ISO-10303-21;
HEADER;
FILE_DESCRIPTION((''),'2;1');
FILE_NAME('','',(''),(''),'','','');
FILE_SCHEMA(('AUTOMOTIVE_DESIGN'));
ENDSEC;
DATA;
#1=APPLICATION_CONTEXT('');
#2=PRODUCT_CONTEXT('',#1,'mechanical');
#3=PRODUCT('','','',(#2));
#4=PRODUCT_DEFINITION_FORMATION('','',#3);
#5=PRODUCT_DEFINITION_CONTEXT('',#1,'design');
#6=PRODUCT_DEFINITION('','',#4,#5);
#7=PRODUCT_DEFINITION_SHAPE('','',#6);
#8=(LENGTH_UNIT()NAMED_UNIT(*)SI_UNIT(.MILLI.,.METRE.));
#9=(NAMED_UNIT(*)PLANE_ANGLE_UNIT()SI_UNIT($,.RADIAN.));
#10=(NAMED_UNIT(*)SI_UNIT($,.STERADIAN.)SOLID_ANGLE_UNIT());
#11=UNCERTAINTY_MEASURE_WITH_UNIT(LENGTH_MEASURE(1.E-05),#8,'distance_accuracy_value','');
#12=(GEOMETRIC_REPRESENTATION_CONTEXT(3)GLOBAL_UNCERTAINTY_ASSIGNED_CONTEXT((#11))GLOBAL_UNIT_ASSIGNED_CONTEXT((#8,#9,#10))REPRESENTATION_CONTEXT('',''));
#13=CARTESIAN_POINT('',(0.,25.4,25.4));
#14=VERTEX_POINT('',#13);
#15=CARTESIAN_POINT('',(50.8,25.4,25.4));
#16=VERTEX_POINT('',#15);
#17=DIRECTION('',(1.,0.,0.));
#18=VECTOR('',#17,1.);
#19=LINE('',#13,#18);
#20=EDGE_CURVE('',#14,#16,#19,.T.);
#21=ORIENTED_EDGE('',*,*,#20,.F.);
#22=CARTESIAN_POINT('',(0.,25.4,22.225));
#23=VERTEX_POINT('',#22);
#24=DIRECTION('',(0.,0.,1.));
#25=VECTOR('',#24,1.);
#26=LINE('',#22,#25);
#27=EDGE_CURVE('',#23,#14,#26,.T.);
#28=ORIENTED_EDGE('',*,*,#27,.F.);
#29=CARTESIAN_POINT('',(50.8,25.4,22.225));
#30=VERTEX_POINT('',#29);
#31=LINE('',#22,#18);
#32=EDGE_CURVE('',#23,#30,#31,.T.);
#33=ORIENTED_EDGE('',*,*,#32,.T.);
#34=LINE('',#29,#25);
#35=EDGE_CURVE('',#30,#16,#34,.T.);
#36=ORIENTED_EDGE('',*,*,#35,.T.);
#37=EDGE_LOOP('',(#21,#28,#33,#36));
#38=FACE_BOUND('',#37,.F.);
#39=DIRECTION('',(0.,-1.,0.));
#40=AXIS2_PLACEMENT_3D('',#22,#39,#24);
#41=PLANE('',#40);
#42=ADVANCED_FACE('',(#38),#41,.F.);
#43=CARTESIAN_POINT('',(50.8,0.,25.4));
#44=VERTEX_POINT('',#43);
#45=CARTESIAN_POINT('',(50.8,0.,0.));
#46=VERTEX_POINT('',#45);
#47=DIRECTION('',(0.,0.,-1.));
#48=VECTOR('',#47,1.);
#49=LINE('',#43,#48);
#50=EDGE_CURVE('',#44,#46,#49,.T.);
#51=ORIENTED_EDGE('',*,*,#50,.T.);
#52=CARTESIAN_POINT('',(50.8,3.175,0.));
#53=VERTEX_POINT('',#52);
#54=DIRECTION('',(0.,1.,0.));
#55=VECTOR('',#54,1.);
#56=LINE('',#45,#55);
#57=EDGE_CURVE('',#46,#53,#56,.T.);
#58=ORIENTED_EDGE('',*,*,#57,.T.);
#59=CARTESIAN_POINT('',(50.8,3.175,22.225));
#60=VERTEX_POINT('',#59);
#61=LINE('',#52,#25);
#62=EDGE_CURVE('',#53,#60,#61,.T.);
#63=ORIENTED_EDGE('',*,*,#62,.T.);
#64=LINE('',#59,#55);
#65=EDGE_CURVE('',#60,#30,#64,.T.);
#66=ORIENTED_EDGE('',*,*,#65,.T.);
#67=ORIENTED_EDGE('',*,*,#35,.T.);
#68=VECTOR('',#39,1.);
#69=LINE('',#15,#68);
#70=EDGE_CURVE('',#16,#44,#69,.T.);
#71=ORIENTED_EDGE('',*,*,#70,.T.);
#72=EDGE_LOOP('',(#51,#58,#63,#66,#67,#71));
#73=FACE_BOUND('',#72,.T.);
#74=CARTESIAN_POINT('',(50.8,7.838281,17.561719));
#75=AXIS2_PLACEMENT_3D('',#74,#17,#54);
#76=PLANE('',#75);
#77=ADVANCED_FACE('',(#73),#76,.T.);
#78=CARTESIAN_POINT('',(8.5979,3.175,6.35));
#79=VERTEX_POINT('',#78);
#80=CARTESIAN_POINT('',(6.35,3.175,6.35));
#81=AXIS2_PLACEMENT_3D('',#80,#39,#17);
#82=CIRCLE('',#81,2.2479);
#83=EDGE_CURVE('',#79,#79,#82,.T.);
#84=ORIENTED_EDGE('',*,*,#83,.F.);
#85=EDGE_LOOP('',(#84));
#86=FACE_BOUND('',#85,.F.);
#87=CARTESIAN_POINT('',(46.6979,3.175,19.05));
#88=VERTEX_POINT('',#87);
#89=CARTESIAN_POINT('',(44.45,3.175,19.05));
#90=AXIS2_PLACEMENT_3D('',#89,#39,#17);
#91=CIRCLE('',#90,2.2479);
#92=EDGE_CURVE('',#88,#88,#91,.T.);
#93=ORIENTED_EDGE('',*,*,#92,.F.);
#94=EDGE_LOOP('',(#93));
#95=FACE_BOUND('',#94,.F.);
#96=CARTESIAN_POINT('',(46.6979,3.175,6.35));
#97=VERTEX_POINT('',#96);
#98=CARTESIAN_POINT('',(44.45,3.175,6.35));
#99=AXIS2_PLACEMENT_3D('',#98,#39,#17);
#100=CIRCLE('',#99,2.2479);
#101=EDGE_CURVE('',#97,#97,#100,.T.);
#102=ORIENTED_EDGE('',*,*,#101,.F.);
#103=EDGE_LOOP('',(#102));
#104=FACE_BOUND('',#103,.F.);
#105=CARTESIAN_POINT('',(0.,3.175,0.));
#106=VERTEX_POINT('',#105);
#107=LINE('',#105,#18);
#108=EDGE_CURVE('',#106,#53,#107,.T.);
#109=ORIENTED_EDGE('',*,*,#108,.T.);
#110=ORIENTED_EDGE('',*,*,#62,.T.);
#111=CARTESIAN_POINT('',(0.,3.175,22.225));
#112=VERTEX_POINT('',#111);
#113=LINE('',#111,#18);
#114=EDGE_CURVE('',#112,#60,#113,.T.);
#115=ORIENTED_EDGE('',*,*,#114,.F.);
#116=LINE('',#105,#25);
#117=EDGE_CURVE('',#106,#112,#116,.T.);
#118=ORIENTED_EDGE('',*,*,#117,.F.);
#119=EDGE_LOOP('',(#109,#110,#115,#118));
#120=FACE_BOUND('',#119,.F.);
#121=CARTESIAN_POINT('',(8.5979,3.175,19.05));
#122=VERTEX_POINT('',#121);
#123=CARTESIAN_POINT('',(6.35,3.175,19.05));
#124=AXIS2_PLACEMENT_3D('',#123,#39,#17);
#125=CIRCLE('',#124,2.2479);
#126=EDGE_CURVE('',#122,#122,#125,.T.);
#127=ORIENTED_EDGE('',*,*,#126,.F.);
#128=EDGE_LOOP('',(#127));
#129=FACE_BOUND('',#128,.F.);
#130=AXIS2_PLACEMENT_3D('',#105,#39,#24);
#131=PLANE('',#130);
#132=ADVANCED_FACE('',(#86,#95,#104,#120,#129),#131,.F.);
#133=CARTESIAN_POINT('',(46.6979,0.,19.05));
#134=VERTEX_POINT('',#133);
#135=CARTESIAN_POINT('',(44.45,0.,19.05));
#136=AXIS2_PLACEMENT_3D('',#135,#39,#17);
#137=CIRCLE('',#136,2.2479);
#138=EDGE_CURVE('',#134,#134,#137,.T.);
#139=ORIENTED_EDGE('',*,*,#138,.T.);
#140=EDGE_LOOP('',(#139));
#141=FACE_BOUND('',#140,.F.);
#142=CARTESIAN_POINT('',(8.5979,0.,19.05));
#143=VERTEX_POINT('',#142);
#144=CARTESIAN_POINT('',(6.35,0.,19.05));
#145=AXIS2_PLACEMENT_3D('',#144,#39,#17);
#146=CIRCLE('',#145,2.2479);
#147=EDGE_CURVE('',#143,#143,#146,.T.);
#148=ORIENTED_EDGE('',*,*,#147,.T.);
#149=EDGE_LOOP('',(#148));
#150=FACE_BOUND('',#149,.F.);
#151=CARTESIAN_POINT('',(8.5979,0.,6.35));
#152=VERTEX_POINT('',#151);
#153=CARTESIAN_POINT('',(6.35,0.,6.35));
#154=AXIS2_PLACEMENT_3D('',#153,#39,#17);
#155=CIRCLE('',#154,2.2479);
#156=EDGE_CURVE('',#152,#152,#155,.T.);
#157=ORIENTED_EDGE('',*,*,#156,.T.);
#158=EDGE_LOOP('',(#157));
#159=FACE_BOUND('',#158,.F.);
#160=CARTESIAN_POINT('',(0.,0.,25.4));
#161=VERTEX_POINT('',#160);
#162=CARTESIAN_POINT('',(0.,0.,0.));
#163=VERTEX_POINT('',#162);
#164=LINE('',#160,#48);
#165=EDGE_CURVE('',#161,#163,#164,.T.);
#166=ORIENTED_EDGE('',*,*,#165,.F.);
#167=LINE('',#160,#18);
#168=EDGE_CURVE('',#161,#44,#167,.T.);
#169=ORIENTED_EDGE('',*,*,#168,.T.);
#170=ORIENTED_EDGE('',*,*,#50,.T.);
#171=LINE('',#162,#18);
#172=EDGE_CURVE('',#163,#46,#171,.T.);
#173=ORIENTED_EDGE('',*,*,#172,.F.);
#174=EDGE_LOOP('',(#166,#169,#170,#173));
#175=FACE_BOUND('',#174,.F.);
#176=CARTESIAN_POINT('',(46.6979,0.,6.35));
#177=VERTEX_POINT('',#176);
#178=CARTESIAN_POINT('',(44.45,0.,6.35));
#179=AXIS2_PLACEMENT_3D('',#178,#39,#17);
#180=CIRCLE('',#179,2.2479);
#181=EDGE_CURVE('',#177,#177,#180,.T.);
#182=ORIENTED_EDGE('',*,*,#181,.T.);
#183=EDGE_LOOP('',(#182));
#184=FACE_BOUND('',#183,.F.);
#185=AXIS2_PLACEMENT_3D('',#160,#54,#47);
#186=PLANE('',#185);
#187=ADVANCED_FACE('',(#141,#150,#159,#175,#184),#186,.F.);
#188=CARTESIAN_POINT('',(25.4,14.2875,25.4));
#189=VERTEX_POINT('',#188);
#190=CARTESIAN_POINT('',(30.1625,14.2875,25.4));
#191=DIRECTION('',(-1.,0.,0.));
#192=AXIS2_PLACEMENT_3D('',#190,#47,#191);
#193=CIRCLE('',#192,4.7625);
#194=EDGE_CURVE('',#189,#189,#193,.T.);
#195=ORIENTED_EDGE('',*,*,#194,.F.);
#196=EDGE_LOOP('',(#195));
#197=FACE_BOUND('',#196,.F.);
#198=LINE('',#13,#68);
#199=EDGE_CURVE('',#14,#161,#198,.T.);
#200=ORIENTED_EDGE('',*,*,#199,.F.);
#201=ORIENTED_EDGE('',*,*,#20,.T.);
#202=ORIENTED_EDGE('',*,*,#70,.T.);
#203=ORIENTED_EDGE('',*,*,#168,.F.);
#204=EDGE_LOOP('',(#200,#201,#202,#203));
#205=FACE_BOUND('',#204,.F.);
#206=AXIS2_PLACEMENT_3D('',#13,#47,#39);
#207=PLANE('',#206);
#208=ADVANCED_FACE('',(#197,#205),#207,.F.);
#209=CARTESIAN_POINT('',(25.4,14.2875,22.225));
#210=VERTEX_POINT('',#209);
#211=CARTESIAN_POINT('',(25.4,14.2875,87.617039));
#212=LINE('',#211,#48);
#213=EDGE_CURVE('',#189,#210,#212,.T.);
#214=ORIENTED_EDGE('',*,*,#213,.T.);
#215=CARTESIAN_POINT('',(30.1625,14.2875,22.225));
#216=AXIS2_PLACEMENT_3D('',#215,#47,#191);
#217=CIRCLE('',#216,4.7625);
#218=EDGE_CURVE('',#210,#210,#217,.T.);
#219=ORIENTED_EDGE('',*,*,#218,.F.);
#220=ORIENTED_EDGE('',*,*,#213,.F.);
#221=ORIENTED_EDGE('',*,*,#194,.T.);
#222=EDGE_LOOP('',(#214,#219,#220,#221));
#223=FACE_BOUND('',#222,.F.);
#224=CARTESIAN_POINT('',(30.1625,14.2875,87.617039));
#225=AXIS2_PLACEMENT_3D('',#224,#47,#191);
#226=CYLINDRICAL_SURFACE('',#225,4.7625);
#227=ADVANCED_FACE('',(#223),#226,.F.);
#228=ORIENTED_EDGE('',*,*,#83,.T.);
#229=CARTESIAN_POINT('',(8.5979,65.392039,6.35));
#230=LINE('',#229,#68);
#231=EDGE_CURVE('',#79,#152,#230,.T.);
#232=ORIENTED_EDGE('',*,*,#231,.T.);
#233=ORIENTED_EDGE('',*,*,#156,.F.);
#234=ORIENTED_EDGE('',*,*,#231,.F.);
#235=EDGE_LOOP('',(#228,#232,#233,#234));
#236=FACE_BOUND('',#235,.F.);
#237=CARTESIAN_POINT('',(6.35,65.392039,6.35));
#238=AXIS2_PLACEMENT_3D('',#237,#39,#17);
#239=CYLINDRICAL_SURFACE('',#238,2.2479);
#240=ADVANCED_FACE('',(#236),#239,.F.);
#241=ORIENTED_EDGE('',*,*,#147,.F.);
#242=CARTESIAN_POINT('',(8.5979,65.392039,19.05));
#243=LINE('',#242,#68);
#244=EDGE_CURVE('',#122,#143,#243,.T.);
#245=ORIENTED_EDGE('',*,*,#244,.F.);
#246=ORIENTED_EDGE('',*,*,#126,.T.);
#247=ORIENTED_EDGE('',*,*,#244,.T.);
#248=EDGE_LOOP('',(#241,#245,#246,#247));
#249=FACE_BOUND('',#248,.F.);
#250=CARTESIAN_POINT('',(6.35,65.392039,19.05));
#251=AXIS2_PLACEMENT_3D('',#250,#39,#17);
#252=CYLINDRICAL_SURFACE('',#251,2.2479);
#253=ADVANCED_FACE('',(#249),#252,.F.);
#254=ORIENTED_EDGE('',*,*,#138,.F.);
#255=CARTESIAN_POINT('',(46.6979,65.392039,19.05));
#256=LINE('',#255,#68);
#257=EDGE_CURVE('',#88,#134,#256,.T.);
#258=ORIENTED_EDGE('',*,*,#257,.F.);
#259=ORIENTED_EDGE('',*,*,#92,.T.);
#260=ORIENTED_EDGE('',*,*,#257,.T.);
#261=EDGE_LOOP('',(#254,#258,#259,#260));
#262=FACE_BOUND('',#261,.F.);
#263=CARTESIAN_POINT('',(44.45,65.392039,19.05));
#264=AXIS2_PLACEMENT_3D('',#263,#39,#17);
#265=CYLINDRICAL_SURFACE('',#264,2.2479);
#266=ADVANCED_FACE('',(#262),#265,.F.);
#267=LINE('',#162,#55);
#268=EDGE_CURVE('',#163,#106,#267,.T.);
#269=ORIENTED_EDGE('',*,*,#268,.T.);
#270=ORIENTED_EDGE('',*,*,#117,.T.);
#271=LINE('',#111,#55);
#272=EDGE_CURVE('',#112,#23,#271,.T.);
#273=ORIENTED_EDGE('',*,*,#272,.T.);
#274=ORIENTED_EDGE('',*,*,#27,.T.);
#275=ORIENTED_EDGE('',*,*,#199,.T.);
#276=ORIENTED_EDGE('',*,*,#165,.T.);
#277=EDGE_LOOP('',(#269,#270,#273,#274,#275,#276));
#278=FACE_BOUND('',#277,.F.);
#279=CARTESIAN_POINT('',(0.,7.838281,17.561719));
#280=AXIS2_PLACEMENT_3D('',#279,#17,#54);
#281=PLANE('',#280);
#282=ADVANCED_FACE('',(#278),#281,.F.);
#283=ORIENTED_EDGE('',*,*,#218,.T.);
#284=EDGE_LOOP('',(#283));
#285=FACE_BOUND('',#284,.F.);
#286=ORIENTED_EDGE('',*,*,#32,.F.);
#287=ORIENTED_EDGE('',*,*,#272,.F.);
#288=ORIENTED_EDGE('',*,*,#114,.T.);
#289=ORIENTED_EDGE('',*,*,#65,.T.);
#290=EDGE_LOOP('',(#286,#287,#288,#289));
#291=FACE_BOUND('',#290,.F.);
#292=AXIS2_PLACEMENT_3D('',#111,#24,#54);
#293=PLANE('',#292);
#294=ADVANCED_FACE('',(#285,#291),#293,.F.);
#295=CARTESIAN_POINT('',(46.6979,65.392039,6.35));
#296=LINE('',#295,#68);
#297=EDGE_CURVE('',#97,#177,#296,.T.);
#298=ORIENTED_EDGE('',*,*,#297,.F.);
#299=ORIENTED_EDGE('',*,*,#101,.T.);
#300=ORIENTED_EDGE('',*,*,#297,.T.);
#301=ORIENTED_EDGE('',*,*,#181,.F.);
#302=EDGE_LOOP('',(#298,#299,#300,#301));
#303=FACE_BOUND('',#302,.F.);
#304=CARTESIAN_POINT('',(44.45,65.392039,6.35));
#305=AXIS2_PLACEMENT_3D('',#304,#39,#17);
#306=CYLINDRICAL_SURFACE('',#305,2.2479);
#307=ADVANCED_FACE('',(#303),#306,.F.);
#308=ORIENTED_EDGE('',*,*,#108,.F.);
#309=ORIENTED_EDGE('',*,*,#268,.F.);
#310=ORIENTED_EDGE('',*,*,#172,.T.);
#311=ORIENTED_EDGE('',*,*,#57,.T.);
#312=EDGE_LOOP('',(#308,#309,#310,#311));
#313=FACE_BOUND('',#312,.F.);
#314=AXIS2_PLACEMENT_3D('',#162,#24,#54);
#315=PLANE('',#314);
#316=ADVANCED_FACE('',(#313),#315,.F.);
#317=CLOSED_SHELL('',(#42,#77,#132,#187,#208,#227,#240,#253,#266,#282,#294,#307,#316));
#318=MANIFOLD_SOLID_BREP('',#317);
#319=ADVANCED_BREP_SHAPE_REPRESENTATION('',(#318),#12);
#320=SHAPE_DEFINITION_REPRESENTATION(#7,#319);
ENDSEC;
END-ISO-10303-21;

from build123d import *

# Parameters (mm, degrees)
F1_DEPTH = 50.8
F4_D     = 4.4958
F5_D     = 9.525


# Not quite as in the source:
# - a length typed as a fraction of an inch, garbled in the dataset ("3 / 203.2 mm" for 3/8 in), is restored


with BuildPart() as f1:
    # F0 (on Right) → F1 (new body)
    with BuildSketch(Plane.YZ):
        Polygon((0, 25.4), (0, 0), (3.175, 0), (3.175, 22.225), (25.4, 22.225), (25.4, 25.4), align=None)
    extrude(amount=F1_DEPTH)

    # F4 (through all)
    with Locations(Plane(origin=(0, 3.175, 0), x_dir=(-1, 0, 0), z_dir=(0, 1, 0))):
        with Locations((-44.45, 6.35), (-44.45, 19.05), (-6.35, 19.05), (-6.35, 6.35)):
            Hole(F4_D / 2)

    # F5 (through all)
    with Locations(Plane.XY.offset(25.4)):
        with Locations((30.1625, 14.2875)):
            Hole(F5_D / 2)


solid = f1.part
